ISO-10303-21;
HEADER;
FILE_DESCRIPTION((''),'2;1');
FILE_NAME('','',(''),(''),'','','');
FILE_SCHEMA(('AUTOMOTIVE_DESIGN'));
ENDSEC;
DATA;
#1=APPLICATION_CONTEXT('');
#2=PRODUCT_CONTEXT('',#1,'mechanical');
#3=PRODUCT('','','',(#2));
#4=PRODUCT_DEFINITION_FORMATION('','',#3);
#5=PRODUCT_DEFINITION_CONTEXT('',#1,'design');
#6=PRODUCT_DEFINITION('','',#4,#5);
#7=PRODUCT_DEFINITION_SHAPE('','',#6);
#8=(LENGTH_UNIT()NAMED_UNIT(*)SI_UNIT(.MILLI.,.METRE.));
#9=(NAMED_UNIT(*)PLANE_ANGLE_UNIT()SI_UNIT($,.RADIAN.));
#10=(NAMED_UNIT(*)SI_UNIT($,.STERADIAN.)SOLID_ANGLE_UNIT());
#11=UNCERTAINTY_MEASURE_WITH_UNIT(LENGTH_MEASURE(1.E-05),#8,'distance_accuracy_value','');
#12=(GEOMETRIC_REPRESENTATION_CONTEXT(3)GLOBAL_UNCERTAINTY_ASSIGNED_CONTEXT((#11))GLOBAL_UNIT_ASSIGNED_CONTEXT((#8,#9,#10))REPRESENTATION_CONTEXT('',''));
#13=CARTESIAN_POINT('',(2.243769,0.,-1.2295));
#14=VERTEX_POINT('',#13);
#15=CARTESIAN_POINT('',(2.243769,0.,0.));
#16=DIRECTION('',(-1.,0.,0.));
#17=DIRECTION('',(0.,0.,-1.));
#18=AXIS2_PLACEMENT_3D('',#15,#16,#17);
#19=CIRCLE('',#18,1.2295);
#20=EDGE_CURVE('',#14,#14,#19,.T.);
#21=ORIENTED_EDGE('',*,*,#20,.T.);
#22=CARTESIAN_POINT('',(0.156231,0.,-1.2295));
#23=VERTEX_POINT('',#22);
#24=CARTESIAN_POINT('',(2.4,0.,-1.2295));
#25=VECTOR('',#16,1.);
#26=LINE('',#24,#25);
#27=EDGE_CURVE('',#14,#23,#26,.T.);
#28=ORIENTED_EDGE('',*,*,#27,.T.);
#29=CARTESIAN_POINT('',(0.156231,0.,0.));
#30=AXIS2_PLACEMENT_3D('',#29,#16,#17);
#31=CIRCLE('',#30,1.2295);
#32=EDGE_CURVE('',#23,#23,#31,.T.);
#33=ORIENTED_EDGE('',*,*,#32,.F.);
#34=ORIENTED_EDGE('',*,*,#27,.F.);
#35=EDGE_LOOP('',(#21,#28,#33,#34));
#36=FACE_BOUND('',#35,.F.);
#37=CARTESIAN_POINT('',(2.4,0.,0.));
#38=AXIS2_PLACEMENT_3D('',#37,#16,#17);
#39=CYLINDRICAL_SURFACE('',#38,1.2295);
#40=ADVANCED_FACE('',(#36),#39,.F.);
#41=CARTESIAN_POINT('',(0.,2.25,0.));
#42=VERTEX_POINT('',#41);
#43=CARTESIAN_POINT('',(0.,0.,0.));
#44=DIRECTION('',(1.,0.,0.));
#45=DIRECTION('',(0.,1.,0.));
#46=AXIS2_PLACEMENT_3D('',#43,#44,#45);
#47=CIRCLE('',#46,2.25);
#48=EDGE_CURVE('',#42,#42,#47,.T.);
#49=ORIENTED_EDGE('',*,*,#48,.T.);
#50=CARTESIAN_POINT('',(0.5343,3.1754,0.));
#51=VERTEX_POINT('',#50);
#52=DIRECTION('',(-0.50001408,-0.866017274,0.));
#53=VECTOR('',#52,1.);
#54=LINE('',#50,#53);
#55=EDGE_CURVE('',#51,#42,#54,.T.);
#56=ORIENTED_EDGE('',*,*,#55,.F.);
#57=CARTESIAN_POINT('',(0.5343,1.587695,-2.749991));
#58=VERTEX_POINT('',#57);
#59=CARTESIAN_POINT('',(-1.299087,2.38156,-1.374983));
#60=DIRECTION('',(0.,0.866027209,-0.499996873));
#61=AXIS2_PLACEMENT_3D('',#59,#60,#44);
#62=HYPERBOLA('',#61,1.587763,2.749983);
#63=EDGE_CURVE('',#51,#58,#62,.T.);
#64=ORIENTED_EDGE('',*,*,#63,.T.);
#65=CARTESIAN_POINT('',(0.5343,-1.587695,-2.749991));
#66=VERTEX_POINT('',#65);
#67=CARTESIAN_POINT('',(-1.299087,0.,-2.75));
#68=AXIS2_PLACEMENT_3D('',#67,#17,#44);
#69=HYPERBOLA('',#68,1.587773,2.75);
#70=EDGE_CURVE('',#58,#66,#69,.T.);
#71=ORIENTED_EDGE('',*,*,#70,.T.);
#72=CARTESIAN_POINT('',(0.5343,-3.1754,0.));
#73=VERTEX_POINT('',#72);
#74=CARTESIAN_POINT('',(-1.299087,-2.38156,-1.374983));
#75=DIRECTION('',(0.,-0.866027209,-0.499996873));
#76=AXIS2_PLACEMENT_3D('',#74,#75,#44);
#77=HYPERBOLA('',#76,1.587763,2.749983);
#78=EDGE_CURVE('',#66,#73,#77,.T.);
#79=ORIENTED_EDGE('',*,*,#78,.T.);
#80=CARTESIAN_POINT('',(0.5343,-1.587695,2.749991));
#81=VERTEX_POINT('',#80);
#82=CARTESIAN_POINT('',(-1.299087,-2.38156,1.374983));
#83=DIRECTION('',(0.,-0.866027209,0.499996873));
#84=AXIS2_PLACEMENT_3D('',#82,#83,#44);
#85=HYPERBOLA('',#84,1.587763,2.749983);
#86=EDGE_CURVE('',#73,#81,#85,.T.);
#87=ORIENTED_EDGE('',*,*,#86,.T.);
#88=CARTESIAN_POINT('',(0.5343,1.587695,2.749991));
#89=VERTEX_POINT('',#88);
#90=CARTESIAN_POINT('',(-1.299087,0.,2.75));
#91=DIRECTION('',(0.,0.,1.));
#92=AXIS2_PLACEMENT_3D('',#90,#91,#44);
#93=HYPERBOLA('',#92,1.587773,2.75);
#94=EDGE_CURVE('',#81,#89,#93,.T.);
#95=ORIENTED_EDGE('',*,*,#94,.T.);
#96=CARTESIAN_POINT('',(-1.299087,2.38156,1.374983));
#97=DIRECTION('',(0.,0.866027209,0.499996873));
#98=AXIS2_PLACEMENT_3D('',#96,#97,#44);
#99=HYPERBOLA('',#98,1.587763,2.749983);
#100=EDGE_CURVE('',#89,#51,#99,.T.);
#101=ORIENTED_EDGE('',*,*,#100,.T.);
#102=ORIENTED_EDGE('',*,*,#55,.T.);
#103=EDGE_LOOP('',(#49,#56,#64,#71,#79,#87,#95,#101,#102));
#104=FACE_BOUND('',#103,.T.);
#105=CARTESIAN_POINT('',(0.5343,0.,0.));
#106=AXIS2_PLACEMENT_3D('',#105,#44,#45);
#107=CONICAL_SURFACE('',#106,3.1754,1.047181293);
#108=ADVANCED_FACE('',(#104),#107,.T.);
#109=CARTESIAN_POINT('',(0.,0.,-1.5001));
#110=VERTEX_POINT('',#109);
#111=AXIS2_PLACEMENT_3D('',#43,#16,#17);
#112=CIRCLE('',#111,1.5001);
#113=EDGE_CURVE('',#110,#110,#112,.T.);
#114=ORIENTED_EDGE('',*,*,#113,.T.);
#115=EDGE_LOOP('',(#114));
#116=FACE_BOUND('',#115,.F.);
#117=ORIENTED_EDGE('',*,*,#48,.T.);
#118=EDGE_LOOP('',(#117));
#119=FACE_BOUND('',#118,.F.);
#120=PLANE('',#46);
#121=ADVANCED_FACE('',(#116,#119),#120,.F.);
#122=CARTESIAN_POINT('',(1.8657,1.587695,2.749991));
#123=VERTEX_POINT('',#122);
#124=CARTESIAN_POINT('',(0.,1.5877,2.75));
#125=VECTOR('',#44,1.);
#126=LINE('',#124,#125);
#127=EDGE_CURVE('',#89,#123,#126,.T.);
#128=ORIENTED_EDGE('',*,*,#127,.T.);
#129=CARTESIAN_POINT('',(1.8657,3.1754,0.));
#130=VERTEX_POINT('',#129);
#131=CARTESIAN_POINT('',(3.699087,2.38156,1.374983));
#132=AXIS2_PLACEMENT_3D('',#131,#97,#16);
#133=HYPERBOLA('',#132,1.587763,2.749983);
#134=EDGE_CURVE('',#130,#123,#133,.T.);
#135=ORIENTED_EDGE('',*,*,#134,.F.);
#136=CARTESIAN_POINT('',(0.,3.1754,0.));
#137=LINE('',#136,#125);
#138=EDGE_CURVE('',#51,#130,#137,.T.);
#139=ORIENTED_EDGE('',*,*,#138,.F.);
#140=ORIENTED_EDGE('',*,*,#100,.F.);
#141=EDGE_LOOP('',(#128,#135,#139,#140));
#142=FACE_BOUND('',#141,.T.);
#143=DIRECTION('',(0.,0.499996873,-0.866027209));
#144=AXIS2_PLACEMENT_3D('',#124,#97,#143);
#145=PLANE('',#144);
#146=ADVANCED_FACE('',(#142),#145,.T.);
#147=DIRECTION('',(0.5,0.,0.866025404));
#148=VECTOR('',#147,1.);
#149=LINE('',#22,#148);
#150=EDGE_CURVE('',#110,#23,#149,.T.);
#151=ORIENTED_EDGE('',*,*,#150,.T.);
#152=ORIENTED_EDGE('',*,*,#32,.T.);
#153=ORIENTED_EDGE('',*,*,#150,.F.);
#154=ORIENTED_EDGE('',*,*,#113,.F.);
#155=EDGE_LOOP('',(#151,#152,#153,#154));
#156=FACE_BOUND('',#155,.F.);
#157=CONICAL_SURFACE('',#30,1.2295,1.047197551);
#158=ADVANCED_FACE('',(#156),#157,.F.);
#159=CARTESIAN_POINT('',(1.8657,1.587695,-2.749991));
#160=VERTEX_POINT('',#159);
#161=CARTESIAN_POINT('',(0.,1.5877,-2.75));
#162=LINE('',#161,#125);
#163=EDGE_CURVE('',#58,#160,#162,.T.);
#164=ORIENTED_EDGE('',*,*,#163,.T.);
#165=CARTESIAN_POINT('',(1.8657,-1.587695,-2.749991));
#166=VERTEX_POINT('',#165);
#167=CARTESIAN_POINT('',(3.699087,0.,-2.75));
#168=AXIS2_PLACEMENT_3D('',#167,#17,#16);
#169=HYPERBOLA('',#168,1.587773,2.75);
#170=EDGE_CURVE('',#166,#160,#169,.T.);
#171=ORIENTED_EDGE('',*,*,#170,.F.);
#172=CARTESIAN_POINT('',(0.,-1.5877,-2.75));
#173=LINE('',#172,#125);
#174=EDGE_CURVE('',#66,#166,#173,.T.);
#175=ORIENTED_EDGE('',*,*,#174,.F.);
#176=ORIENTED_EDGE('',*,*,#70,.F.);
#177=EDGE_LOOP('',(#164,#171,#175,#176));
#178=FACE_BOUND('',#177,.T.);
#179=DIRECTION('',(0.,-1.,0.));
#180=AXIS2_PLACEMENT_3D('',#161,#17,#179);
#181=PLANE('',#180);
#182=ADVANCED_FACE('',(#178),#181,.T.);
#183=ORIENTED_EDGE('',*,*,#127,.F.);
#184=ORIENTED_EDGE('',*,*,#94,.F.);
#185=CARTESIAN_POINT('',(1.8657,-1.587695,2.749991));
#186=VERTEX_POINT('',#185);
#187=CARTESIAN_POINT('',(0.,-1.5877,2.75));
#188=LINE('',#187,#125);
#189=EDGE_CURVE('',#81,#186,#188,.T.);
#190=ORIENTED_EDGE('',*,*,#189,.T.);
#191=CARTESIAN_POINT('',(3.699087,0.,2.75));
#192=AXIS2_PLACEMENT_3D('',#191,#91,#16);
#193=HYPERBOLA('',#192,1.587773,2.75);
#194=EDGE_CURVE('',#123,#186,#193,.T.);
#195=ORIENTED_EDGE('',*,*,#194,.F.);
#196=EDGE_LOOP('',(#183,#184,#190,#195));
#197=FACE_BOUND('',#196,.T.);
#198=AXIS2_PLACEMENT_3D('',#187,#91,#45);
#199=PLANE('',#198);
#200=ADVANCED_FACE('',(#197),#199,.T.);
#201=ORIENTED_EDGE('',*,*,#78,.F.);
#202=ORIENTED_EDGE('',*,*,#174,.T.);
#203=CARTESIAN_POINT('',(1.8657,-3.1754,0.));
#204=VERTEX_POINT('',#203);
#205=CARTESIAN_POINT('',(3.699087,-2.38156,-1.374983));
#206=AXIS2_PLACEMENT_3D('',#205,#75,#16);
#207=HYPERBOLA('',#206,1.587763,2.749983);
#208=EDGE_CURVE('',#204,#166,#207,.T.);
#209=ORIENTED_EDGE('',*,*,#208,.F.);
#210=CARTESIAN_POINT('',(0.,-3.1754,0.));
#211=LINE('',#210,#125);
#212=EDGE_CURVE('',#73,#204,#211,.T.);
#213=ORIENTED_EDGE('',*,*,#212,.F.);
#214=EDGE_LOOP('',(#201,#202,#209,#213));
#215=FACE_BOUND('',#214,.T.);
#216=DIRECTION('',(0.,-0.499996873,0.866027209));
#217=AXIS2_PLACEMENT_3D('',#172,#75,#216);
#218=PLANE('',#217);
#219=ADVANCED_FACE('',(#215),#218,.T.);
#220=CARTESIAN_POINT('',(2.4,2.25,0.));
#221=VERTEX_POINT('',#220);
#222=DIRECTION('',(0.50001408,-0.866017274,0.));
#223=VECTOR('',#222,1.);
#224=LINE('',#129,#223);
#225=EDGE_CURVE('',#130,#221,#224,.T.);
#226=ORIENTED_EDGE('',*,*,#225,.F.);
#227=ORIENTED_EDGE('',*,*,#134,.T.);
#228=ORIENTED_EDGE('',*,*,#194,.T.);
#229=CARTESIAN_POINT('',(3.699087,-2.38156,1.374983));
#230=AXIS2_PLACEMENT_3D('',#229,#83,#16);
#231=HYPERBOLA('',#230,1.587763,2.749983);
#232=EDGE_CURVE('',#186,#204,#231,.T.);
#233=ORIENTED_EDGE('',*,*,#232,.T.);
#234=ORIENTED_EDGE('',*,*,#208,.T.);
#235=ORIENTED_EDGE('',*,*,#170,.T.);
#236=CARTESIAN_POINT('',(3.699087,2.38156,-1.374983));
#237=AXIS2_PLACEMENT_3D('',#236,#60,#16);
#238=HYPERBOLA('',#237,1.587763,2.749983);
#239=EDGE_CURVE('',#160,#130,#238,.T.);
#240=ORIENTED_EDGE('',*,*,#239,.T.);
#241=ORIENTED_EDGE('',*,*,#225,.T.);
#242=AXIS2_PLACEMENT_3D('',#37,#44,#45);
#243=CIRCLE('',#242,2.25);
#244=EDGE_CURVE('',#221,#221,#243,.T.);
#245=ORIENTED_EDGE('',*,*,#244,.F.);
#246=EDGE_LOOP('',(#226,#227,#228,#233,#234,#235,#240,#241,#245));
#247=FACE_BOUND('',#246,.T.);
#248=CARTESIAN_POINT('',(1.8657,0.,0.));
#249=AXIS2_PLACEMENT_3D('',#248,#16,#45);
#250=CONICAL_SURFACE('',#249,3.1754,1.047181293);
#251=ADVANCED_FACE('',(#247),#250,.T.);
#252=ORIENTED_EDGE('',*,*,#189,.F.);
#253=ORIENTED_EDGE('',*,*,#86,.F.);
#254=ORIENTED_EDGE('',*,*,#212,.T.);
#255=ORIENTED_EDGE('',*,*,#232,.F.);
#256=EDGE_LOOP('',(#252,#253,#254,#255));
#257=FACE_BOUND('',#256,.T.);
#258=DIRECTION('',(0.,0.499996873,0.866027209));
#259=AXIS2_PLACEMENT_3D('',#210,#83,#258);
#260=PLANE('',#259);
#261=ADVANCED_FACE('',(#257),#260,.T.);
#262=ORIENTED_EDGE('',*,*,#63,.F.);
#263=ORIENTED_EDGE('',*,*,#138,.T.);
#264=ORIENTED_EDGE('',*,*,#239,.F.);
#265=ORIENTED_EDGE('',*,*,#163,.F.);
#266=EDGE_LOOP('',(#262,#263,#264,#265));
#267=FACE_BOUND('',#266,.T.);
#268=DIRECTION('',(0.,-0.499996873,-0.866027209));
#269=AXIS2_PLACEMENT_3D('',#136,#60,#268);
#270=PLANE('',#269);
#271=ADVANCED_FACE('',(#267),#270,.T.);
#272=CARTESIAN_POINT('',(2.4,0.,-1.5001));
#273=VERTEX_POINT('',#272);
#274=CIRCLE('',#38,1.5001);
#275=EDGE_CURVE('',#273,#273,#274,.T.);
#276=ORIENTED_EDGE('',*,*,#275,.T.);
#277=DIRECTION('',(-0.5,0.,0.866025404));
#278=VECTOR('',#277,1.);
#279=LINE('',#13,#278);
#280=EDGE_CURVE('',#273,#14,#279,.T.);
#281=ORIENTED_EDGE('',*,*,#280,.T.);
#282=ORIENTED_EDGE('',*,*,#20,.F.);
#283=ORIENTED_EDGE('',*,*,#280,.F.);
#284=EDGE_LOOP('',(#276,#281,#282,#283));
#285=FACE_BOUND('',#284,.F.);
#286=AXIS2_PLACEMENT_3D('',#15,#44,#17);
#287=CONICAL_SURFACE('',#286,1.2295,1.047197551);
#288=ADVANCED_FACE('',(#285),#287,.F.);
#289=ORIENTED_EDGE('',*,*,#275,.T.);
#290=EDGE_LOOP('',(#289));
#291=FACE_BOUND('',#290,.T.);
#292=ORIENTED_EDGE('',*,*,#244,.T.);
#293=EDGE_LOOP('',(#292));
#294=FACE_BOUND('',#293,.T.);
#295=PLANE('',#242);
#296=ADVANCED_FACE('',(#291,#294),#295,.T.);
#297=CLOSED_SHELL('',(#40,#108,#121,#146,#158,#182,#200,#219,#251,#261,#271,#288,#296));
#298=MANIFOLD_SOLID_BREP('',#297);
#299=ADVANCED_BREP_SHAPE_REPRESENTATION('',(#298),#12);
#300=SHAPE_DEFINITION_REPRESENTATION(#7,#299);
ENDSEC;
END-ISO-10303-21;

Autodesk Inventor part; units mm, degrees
ref_plane "YZ Plane" through (0, 0, 0) normal (1, 0, 0) x (0, 1, 0)
ref_plane "XZ Plane" through (0, 0, 0) normal (0, 1, 0) x (-1, 0, 0)
sketch "Skizze1" plane through (0, 0, 0) normal (1, 0, 0) x (0, 1, 0)
  line L0 (-3.1754, 0) -> (-1.5877, 2.75)
  line L1 (-1.5877, 2.75) -> (1.5877, 2.75)
  line L2 (1.5877, 2.75) -> (3.1754, 0)
  line L3 (3.1754, 0) -> (1.5877, -2.75)
  line L4 (1.5877, -2.75) -> (-1.5877, -2.75)
  line L5 (-1.5877, -2.75) -> (-3.1754, 0)
  point P0 (0, 0)
  point P1 (0, 0)
  dimension "d0" = 6.3509
extrude "Körper" add sketch "Skizze1" along normal blind 2.4
sketch "Skizze2" plane through (0, 0, 0) normal (0, 0, 1) x (1, 0, 0)
  line L0 (0, 1.5877) -> (0, 3.1754) projected
  line L1 (0, 3.1754) -> (2.4, 3.1754) projected
  line L2 (2.4, 1.5877) -> (2.4, 3.1754) projected
  line L3 (-0.48, 0) -> (2.88, 0) projected
  line L4 (0.5343, 3.1754) -> (0, 2.25)
  line L5 (1.8657, 3.1754) -> (2.4, 2.25)
  dimension "d3" = 30
  dimension "d4" = 30
  dimension "d5" = 4.5
  dimension "d6" = 4.5
revolve "Fase1" cut sketch "Skizze2" angle 360 about axis through (-10, 0, 0) along (1, 0, 0)
sketch "Skizze3" plane through (2.4, 0, 0) normal (1, 0, 0) x (0, 0, -1)
  arc A0 (-0.625, -1.0825) -> (0.625, -1.0825) centre (0, 0) ccw projected
hole "Gewinde" at (2.4, 0, 0) direction (-1, 0, 0) diameter 2.459 end through all thread size "M3x0.5" class "6H" standard "ISO Metric profile"
chamfer "Fase2" distance 0.2706 angle 30 1 edges at (2.4, 0, 1.2295) measured on face at (2.4, 1.8851, -0.2289)
chamfer "Fase3" distance 0.2706 angle 30 1 edges at (0, 0, 1.2295) measured on face at (0, 1.8851, -0.2289)
ref_plane "Work Plane1" through (-6.3375, 0, 0) normal (0, -0.8660254, -0.5) x (1, 0, 0)
equation "\"d0\" = 1.1547 * SW"
equation "\"d1\" = KOH"
equation "\"d3\" = ANG1"
equation "\"d4\" = ANG2"
equation "\"d5\" = SW0"
equation "\"d6\" = SW01"
equation "\"d8\" = -0.5 * GD1 + 0.5 * NND"
equation "\"d40\" = -0.5 * GD1 + 0.5 * NND"
equation "\"d10\" = -0.5 * GD1 + 0.5 * NND"
equation "\"d41\" = -0.5 * GD1 + 0.5 * NND"
equation "\"ANG1\" = 30deg"
equation "\"ANG2\" = 30deg"
equation "\"NND\" = 3"
equation "\"KOH\" = 2.4"
equation "\"SW\" = 5.5"
equation "\"SW0\" = SW01"
equation "\"SW01\" = 4.5"
equation "\"GUL\" = 0.541266 * PTC"
equation "\"THREADDIA\" = 3"
equation "\"TOA\" = 30deg"
equation "\"PTC\" = 0.5"
equation "\"E0\" = 1.155 * SW"
equation "\"GAL\" = 0.541266 * PTC"
equation "\"GD1\" = 2.458734"
properties part number "DIN 934 - M3" material "Stahl, weich"
